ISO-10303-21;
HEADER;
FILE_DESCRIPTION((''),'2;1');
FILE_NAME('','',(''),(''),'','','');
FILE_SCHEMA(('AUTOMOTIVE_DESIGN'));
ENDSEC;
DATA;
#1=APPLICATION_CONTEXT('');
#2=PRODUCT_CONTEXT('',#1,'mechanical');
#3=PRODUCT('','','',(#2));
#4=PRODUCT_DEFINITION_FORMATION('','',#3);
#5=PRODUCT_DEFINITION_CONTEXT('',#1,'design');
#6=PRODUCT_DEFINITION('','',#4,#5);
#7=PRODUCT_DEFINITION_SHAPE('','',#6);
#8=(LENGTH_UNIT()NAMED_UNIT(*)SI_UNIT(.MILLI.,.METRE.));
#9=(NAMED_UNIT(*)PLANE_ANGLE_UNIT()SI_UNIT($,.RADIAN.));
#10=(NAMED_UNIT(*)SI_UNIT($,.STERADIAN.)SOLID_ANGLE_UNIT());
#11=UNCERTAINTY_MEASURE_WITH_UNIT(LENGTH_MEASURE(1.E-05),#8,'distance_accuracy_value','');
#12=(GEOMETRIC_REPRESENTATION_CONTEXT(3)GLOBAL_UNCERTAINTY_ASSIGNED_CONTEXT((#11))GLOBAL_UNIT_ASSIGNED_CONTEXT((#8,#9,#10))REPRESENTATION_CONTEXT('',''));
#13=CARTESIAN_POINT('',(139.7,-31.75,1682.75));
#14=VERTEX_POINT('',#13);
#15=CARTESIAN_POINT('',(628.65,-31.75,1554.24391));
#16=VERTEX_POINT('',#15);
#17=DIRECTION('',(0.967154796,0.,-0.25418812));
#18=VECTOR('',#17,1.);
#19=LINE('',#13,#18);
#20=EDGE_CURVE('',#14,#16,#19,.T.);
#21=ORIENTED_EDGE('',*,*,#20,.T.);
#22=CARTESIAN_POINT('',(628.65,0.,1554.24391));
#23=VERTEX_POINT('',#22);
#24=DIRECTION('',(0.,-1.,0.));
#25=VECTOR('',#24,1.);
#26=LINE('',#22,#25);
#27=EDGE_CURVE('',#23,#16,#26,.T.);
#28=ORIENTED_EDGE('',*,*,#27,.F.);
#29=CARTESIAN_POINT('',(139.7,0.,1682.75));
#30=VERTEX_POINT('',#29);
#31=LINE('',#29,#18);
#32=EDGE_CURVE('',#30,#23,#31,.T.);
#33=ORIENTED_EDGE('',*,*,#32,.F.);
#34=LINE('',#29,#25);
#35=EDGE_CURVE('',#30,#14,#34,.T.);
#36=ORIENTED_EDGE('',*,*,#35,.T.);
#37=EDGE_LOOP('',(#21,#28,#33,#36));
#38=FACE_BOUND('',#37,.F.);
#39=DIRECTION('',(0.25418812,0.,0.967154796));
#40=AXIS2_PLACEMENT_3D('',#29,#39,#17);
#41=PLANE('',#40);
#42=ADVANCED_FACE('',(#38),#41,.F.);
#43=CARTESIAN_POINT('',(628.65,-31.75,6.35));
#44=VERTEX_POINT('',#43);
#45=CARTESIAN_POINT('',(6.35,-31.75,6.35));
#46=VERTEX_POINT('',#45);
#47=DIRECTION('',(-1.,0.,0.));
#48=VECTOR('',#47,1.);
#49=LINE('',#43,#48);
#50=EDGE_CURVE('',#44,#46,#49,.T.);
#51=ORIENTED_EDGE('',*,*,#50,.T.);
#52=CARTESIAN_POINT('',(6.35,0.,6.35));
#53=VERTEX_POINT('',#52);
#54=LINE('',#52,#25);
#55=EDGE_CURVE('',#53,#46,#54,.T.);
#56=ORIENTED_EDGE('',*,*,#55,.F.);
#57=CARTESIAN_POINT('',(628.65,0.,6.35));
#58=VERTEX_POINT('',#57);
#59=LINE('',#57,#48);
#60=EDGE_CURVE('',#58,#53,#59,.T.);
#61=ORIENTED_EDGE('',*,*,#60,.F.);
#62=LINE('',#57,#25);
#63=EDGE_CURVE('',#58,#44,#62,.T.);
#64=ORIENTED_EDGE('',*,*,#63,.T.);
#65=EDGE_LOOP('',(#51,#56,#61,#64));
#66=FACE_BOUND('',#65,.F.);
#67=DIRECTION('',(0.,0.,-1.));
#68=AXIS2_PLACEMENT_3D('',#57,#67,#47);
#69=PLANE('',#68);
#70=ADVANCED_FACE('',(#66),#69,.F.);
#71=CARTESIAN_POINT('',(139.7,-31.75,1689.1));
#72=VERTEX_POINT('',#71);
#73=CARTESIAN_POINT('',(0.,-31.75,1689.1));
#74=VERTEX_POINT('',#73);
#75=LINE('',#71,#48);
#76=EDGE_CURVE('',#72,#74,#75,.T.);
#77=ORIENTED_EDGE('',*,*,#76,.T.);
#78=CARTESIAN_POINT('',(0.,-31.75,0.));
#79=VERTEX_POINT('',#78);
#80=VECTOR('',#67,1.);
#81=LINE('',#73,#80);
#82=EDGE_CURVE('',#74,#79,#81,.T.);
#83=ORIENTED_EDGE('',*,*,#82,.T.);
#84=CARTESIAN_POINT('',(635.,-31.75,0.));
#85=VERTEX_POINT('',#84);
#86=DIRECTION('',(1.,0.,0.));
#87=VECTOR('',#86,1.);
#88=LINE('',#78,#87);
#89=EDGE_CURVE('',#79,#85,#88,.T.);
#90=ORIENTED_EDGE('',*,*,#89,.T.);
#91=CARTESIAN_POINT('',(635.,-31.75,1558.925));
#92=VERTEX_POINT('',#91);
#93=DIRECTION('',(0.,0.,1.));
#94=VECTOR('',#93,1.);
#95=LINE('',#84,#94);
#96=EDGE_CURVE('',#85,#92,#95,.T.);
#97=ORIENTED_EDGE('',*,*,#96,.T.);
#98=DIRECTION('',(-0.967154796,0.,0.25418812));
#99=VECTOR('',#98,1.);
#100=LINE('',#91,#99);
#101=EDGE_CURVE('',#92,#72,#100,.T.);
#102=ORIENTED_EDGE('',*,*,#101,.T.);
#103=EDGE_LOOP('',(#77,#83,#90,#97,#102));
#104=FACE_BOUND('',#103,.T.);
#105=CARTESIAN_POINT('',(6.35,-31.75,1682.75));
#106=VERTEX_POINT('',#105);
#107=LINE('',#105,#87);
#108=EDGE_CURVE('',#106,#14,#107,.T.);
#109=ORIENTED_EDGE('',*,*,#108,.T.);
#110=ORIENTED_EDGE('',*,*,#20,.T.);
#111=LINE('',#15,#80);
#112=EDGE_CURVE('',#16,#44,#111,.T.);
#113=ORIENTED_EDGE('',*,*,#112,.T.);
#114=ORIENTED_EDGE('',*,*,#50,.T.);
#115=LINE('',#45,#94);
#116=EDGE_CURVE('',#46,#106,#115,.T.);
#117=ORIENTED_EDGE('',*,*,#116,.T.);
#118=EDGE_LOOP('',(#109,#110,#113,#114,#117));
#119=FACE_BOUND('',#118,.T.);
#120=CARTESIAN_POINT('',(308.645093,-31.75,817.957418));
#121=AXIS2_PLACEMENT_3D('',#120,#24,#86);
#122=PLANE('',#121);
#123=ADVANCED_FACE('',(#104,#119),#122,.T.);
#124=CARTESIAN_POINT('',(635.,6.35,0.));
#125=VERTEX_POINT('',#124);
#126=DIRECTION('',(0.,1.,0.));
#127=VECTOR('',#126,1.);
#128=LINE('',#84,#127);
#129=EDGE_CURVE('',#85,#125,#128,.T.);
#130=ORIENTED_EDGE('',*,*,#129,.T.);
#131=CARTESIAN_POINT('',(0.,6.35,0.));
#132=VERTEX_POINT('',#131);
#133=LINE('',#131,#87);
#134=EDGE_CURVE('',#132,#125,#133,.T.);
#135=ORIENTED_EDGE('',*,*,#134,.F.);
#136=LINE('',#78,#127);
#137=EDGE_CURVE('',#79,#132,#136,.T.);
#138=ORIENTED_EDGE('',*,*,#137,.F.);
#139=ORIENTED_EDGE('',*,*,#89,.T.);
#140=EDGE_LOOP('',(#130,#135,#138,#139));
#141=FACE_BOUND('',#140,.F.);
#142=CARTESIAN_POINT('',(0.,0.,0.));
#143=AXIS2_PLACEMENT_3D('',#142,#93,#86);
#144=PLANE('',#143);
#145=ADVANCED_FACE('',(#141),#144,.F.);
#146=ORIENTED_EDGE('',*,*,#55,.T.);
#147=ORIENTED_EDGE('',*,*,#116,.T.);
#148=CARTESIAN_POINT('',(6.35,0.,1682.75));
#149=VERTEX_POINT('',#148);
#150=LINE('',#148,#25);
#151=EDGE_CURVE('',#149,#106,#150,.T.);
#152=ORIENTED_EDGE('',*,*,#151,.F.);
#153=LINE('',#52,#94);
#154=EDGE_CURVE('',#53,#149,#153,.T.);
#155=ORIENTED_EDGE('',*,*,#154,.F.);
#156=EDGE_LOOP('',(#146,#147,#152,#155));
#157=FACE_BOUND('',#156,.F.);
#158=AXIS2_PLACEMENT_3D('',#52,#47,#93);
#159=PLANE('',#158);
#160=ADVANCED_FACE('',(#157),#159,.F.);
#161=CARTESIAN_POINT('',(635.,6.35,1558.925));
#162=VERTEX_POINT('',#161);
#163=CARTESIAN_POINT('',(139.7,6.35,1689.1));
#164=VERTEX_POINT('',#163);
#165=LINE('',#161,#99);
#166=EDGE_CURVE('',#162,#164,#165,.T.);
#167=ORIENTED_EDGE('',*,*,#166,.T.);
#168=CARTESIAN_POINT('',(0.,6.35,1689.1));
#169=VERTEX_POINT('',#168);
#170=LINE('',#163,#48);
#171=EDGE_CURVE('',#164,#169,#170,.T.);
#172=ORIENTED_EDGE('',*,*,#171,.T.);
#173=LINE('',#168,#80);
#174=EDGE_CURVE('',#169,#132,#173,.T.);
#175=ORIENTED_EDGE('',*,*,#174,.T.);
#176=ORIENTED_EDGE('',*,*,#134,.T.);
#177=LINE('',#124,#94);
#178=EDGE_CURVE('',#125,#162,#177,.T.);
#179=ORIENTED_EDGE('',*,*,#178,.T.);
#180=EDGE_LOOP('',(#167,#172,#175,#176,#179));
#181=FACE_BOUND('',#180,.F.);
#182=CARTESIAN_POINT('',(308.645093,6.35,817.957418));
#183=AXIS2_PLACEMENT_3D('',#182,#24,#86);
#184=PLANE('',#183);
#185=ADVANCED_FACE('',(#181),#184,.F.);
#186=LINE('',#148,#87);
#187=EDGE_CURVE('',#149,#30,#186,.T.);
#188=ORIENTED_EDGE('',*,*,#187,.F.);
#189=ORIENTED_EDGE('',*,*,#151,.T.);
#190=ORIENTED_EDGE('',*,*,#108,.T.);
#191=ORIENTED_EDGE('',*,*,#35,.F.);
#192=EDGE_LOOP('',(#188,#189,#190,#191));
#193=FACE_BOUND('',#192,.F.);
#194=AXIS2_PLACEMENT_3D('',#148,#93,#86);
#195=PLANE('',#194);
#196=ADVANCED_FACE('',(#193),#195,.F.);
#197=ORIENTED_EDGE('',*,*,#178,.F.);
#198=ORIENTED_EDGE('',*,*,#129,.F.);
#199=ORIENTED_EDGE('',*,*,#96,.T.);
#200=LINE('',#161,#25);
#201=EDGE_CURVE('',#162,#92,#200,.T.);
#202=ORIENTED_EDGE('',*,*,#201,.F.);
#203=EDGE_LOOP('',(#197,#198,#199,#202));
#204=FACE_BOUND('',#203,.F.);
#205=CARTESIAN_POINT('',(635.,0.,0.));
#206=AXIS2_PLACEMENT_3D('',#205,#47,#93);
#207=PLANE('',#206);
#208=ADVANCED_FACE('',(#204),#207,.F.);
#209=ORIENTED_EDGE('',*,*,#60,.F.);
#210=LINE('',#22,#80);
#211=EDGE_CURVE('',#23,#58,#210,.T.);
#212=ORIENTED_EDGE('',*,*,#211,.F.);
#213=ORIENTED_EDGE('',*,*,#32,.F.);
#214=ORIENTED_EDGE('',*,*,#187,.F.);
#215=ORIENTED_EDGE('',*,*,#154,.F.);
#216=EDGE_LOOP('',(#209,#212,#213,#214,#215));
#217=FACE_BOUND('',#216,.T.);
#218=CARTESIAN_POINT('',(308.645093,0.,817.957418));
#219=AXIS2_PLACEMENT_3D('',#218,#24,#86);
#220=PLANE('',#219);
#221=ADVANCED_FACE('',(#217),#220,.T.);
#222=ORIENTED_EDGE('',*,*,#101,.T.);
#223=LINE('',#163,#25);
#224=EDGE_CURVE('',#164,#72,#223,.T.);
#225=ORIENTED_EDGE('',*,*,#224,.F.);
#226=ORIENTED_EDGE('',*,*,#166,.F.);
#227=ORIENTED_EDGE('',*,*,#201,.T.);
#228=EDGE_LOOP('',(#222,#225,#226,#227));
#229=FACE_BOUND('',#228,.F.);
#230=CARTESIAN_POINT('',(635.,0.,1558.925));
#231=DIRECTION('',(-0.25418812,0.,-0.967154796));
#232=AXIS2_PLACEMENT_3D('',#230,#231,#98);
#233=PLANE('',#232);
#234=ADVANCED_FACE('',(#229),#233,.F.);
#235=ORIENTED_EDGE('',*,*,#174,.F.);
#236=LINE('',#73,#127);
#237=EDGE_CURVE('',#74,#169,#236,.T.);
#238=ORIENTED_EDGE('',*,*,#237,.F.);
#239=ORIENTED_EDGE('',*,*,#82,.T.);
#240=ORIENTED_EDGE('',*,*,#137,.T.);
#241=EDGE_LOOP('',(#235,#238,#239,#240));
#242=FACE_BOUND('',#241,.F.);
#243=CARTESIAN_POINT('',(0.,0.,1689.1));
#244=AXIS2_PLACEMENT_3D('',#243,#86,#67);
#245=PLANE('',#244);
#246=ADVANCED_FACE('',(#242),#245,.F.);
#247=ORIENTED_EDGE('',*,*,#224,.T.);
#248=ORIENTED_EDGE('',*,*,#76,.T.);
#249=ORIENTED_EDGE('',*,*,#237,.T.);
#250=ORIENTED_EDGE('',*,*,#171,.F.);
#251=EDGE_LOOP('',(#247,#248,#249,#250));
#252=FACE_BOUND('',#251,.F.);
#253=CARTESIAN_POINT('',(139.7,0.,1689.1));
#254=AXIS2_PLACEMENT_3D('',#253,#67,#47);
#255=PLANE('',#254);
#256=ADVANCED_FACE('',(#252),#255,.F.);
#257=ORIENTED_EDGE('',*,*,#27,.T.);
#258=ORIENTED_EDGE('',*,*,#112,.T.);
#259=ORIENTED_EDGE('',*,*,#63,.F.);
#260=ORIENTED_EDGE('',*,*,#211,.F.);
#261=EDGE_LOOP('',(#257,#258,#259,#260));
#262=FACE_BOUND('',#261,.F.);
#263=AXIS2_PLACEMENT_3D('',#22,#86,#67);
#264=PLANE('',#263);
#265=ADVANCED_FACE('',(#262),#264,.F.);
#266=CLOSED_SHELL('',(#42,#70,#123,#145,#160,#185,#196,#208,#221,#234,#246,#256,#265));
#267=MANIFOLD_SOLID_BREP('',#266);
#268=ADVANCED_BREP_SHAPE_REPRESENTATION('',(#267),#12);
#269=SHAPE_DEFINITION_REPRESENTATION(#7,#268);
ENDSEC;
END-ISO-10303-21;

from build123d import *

# Parameters (mm, degrees)
F1_DEPTH = 6.35
F3_DEPTH = 31.75


# Not quite as in the source:
# - a length typed as a fraction of an inch, garbled in the dataset ("3 / 203.2 mm" for 3/8 in), is restored


with BuildPart() as f1:
    # F0 (on Front) → F1 (new body)
    with BuildSketch(Plane.XZ):
        Polygon((0, 1689.1), (0, 0), (635, 0), (635, 1558.925), (139.7, 1689.1), align=None)
    extrude(amount=-F1_DEPTH)

    # F2 (on Front) → F3 (join)
    with BuildSketch(Plane.XZ):
        Polygon((635, 0), (635, 1558.925), (139.7, 1689.1), (0, 1689.1), (0, 0), align=None)
        Polygon((6.35, 6.35), (6.35, 1682.75), (139.7, 1682.75), (628.65, 1554.2439102564), (628.65, 6.35), align=None, mode=Mode.SUBTRACT)
    extrude(amount=F3_DEPTH)


solid = f1.part
